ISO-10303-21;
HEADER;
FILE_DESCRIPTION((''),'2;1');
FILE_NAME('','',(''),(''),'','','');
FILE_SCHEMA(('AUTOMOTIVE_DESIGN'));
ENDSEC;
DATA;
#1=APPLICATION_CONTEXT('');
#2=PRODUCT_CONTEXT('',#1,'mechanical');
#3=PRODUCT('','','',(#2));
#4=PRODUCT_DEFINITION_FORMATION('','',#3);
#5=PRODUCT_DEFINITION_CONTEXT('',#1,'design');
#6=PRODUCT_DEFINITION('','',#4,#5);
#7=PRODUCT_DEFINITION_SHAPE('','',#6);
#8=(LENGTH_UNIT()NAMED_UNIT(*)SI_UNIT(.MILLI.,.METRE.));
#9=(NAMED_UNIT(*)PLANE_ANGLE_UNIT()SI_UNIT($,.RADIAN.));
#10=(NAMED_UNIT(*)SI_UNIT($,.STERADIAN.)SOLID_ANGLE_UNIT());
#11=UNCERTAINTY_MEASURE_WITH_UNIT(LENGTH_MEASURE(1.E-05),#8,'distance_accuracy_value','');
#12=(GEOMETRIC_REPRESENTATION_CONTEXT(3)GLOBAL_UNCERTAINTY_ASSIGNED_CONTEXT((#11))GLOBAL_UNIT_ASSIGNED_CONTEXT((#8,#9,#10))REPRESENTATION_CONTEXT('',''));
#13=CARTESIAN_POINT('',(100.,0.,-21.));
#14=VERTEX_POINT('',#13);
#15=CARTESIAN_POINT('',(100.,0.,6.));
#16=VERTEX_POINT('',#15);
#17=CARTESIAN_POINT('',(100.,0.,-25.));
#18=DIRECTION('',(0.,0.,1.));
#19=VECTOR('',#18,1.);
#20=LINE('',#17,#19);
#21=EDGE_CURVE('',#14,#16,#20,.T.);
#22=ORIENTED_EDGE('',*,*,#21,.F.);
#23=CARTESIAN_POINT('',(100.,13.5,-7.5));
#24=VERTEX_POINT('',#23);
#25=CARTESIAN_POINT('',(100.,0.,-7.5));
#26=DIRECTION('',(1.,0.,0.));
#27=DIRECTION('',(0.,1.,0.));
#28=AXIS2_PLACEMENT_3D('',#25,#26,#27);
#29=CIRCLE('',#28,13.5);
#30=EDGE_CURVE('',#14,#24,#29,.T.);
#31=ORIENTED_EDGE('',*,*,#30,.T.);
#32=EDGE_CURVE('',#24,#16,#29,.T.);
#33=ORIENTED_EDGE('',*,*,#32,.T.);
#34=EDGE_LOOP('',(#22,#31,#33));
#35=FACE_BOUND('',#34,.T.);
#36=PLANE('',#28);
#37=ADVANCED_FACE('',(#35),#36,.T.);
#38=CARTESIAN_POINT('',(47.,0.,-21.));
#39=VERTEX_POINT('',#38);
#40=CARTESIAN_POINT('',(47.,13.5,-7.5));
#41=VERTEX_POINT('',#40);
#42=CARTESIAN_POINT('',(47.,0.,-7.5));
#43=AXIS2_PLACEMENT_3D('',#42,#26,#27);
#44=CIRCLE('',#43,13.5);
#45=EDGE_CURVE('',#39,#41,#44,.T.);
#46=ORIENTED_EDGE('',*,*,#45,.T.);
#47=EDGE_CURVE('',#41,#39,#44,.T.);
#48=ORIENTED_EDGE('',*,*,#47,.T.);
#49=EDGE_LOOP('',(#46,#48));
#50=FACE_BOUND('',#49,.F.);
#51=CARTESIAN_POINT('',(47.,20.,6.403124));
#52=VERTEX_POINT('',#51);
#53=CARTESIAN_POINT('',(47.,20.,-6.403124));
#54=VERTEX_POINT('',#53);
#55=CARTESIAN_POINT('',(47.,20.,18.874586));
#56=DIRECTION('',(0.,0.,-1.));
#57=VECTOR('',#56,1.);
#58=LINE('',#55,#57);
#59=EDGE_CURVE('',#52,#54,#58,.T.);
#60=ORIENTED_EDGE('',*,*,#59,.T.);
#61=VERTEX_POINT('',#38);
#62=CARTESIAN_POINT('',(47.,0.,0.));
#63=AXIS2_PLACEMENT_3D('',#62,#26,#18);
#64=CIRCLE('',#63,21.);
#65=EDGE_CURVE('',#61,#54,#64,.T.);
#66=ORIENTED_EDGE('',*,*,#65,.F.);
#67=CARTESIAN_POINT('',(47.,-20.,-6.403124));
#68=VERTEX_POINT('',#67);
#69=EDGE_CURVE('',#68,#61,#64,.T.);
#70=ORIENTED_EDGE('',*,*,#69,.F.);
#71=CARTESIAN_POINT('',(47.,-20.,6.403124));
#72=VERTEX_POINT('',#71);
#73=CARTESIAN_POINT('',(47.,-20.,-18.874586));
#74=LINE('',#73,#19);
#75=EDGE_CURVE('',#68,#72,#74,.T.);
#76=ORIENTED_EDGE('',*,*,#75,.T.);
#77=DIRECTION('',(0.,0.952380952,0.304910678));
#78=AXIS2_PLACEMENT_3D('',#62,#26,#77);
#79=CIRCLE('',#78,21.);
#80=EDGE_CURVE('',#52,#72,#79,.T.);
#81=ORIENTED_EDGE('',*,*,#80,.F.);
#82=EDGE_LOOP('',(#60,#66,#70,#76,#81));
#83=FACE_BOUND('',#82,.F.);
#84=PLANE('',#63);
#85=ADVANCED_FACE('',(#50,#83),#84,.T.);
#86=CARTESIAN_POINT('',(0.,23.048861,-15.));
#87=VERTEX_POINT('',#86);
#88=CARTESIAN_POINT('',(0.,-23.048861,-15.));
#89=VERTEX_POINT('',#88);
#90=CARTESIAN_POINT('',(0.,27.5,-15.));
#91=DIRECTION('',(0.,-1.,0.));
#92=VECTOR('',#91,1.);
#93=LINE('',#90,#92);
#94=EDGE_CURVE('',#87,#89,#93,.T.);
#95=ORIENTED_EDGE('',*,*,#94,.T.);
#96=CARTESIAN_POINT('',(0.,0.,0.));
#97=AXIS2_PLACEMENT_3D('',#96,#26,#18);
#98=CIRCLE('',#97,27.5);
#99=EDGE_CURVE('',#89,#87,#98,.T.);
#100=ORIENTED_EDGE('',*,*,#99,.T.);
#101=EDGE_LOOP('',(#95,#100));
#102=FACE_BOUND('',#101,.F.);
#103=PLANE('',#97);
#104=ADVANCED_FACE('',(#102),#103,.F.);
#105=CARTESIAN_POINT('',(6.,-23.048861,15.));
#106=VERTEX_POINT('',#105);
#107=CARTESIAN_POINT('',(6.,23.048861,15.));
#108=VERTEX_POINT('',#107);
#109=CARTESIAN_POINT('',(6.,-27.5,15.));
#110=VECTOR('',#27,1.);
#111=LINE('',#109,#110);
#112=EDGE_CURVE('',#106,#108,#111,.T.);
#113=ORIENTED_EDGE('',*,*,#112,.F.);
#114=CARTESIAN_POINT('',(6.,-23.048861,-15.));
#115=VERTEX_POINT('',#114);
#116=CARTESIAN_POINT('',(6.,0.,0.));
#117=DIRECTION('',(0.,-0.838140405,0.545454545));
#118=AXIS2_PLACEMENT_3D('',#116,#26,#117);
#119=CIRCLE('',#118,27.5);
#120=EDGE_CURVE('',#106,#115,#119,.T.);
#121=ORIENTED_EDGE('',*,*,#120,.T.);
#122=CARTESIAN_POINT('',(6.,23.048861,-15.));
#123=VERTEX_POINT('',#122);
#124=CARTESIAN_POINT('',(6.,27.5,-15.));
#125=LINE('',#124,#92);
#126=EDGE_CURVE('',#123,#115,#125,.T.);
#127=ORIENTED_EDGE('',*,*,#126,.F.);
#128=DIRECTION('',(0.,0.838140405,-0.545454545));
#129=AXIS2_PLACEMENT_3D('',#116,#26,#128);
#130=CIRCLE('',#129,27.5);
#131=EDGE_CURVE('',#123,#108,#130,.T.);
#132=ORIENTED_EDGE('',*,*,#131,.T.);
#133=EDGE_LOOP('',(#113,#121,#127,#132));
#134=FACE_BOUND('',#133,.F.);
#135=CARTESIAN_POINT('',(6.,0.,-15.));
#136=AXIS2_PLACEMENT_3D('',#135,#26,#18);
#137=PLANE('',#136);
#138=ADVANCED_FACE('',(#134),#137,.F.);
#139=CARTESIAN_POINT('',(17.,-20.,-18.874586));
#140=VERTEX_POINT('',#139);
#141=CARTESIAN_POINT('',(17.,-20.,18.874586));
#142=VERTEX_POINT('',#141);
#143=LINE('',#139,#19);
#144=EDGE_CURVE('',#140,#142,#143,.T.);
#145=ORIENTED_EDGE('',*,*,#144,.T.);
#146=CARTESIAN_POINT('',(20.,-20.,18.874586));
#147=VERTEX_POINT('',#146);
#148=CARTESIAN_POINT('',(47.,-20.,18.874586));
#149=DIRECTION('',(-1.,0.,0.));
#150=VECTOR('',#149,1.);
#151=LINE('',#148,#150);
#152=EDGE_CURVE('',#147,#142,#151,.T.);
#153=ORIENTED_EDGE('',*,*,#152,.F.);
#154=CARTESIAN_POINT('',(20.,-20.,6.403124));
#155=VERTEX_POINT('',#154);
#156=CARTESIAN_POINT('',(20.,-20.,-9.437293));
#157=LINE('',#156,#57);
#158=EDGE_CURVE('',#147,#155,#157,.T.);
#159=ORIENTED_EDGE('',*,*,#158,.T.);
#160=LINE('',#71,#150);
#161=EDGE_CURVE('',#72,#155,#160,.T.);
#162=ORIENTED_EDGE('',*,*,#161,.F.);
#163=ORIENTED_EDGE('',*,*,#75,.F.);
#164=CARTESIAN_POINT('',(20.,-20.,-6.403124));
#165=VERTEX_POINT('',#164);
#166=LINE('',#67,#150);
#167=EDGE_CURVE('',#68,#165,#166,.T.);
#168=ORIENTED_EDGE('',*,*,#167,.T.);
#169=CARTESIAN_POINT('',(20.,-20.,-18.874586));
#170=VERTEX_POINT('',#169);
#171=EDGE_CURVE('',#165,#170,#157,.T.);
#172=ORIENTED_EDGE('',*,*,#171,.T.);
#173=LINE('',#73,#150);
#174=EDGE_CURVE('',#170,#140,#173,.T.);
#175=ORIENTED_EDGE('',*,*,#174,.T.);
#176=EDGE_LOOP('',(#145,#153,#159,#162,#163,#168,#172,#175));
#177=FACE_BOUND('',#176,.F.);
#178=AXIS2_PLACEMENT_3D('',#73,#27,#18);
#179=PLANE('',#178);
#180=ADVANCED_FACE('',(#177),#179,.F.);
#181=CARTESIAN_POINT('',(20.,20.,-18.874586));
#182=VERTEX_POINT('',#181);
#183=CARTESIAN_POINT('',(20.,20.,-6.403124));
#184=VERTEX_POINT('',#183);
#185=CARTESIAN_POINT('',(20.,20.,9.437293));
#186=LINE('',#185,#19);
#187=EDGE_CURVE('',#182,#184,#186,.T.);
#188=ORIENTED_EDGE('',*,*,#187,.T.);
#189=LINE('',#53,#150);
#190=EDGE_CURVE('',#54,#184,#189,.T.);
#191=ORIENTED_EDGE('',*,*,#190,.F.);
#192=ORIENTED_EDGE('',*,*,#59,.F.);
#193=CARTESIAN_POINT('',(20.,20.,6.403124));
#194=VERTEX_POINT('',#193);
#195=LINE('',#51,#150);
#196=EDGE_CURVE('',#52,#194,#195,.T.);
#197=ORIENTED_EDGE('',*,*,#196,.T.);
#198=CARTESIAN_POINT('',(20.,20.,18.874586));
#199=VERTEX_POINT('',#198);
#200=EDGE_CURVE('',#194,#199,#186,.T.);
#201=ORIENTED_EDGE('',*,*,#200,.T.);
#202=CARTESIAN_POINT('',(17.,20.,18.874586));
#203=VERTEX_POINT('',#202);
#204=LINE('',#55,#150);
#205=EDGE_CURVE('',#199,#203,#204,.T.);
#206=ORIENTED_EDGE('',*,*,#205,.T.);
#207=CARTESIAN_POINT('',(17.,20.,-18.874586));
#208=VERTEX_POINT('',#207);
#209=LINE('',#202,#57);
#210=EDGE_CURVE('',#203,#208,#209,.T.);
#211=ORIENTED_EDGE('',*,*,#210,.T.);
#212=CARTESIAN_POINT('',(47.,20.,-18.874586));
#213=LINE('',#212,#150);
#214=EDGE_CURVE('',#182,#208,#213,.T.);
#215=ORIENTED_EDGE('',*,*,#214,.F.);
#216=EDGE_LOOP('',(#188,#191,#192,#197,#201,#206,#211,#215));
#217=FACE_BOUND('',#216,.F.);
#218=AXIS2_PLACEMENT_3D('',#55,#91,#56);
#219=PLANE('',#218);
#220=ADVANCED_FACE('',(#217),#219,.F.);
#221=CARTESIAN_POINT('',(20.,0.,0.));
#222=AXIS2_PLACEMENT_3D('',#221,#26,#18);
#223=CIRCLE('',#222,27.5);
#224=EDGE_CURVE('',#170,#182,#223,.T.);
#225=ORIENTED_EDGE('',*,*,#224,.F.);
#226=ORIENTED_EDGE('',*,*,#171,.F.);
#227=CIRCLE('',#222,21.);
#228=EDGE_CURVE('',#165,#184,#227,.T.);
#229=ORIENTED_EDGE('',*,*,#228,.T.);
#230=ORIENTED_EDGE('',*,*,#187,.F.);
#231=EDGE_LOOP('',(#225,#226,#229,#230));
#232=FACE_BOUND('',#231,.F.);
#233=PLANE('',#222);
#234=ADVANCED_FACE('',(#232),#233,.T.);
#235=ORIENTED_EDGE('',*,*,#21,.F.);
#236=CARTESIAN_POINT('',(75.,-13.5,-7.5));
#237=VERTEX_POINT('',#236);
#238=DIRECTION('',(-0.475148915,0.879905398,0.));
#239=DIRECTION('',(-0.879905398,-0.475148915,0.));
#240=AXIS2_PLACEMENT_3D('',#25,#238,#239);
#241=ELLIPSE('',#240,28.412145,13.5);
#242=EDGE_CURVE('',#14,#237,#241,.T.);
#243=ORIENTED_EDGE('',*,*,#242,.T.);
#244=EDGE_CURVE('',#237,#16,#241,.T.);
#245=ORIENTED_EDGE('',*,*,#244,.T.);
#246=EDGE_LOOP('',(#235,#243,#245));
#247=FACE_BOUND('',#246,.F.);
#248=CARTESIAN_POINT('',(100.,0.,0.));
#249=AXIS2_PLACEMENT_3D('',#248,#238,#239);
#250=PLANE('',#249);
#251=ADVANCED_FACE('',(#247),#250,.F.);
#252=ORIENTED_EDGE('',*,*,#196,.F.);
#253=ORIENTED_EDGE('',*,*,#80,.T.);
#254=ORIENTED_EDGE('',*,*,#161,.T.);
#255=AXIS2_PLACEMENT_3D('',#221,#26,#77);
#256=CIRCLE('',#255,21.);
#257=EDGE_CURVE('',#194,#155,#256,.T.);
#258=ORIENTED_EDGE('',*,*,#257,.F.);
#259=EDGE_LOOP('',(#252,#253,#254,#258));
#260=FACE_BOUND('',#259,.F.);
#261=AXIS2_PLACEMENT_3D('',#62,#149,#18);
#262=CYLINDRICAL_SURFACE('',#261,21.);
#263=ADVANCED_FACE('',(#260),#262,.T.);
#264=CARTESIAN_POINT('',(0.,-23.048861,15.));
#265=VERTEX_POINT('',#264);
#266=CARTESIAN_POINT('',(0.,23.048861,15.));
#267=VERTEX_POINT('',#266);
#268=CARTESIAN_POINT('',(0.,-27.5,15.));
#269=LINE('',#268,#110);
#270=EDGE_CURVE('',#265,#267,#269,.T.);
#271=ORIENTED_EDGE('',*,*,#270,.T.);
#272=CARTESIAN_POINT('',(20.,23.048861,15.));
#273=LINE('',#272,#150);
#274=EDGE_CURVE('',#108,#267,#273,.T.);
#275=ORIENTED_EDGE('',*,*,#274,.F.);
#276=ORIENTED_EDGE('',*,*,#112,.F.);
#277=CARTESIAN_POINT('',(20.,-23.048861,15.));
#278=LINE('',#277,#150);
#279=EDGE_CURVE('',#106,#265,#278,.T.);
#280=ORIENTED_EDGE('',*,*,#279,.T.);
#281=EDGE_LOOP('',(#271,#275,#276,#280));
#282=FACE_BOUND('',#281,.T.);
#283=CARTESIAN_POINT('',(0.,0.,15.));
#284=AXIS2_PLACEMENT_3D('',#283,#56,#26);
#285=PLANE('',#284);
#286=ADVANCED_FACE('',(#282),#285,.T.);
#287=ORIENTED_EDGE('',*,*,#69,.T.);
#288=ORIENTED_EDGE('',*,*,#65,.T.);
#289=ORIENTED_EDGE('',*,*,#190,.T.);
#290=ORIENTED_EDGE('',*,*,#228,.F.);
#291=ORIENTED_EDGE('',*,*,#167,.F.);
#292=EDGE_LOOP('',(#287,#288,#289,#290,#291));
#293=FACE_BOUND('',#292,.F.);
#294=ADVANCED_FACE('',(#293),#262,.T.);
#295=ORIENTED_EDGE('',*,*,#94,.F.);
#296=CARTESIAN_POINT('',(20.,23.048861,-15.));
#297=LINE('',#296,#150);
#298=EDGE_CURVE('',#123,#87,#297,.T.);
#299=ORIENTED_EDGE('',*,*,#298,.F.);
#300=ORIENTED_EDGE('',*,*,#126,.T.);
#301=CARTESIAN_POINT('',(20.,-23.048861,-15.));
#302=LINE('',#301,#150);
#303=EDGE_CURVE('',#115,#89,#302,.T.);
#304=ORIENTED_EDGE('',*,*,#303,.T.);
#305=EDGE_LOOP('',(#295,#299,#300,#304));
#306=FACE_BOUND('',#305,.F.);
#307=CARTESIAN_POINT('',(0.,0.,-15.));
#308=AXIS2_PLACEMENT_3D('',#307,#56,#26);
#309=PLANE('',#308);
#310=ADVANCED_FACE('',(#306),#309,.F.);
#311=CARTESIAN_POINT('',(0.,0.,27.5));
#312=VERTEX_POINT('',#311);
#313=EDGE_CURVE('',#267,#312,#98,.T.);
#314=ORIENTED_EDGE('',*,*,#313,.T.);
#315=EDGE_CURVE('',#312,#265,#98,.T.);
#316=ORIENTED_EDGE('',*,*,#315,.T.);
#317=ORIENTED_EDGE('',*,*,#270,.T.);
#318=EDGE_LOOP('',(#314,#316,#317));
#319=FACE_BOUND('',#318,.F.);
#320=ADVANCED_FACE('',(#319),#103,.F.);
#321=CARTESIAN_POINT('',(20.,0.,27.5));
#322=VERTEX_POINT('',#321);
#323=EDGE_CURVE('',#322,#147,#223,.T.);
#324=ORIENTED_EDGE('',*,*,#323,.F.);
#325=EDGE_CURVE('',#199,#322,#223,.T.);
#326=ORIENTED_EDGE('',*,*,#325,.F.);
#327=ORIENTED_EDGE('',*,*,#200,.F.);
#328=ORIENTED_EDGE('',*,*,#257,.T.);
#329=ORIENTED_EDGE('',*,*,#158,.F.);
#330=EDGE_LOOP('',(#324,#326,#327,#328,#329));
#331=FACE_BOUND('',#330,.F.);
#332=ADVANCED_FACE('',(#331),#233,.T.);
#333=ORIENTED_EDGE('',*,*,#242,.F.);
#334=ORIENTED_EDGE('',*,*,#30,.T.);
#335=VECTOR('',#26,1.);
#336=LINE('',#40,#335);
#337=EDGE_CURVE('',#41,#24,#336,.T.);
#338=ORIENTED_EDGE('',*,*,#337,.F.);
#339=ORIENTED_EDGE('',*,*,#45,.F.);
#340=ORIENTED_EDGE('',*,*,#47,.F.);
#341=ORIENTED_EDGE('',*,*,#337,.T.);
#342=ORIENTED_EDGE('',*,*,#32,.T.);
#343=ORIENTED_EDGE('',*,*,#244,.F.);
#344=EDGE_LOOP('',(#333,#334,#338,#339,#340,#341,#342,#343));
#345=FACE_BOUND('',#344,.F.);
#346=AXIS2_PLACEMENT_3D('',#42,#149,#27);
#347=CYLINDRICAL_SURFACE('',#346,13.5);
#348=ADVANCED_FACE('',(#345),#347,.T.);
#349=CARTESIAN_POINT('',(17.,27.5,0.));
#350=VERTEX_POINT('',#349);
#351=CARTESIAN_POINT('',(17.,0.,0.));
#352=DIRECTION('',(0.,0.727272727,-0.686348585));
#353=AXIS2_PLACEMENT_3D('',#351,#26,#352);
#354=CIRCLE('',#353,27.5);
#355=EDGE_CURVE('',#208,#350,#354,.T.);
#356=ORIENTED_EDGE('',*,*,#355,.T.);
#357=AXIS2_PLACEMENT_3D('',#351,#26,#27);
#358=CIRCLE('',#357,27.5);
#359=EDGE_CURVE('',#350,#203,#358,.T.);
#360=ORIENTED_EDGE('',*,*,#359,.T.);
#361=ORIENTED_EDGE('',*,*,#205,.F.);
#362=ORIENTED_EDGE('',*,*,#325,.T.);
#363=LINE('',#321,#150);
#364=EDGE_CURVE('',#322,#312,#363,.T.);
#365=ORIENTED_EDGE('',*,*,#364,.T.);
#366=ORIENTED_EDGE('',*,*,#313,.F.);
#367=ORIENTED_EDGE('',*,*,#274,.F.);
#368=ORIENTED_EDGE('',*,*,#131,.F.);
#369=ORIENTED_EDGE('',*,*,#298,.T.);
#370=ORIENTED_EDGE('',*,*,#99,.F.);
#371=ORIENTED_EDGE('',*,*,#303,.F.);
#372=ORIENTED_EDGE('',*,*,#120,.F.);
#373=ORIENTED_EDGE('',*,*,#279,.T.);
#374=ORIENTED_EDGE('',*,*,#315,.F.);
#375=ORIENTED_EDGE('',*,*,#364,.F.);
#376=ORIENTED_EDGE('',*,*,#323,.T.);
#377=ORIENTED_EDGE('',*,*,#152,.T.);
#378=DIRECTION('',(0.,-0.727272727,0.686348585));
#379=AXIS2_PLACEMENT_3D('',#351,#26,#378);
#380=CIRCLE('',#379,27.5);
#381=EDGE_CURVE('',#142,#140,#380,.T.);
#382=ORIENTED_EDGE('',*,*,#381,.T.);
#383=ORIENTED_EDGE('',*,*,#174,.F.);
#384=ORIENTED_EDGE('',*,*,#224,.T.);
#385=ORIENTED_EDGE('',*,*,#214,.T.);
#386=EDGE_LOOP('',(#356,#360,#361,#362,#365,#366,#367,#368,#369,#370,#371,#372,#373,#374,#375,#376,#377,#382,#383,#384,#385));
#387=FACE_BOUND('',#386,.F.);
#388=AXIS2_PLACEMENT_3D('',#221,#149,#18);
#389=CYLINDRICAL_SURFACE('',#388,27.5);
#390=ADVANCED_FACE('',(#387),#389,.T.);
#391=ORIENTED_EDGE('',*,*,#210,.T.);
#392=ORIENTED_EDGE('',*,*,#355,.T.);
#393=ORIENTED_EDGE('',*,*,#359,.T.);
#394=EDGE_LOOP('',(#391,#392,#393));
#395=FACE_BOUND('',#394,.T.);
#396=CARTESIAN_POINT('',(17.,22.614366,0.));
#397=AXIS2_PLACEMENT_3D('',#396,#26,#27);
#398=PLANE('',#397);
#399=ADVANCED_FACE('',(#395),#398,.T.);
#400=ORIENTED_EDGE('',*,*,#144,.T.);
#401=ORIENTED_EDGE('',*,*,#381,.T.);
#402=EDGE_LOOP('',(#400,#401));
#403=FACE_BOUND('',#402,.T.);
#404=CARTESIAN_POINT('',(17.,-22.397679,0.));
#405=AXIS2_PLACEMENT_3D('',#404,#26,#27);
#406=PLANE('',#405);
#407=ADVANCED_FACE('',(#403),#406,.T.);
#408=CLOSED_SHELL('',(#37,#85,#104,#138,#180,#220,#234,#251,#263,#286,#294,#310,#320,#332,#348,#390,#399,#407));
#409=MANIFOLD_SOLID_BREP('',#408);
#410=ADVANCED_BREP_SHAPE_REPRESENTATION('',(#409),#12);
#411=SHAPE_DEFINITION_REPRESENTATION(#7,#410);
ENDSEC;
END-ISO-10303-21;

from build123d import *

# Parameters (mm, degrees)
F2_R     = 13.5
F3_DEPTH = 53
F5_DEPTH = 30
F6_W     = 6
F6_H     = 30
F7_DEPTH = 27.5
F9_DEPTH = 25


# Not quite as in the source:
# - a feature names something its author has since deleted; it is built from what else it names


with BuildPart() as f1:
    # F0 (on Front) → F1 (revolve)
    with BuildSketch(Plane.XZ):
        Polygon((0, 27.5), (0, 0), (47, 0), (47, 21), (20, 21), (20, 27.5), align=None)
    revolve(axis=Axis((37.6517102122, 0, 0), (1, 0, 0)))

    # F2 (on face) → F3 (join)
    with BuildSketch(Plane.YZ.offset(47)):
        with Locations((0, -7.5)):
            Circle(F2_R)
    extrude(amount=F3_DEPTH)

    # F4 (on face) → F5 (cut)
    with BuildSketch(Plane.YZ.offset(47)):
        with BuildLine():
            ThreePointArc((20, -18.8745860882), (25.5563103753, -10.1550480058), (27.5, 0))
            ThreePointArc((27.5, 0), (25.5563103753, 10.1550480058), (20, 18.8745860882))
            Line((20, 18.8745860882), (20, 6.4031242374))
            ThreePointArc((20, 6.4031242374), (21, 0), (20, -6.4031242374))
            Line((20, -6.4031242374), (20, -18.8745860882))
        make_face()
        with BuildLine():
            Line((-20, 6.4031242374), (-20, 18.8745860882))
            ThreePointArc((-20, 18.8745860882), (-27.5, 0), (-20, -18.8745860882))
            Line((-20, -18.8745860882), (-20, -6.4031242374))
            ThreePointArc((-20, -6.4031242374), (-21, 0), (-20, 6.4031242374))
        make_face()
        with BuildLine():
            ThreePointArc((20, -6.4031242374), (21, 0), (20, 6.4031242374))
            Line((20, 6.4031242374), (20, -6.4031242374))
        make_face()
        with BuildLine():
            Line((-20, -6.4031242374), (-20, 6.4031242374))
            ThreePointArc((-20, 6.4031242374), (-21, 0), (-20, -6.4031242374))
        make_face()
    extrude(amount=-F5_DEPTH, mode=Mode.SUBTRACT)

    # F6 (on Front) → F7 (cut, symmetric)
    with BuildSketch(Plane.XZ):
        with Locations((3, 0)):
            Rectangle(F6_W, F6_H)
    extrude(amount=F7_DEPTH, both=True, mode=Mode.SUBTRACT)

    # F8 (on Top) → F9 (cut, symmetric)
    with BuildSketch(Plane.XY):
        Polygon((100, -13.5), (100, 0), (75, -13.5), align=None)
    extrude(amount=F9_DEPTH, both=True, mode=Mode.SUBTRACT)


solid = f1.part
